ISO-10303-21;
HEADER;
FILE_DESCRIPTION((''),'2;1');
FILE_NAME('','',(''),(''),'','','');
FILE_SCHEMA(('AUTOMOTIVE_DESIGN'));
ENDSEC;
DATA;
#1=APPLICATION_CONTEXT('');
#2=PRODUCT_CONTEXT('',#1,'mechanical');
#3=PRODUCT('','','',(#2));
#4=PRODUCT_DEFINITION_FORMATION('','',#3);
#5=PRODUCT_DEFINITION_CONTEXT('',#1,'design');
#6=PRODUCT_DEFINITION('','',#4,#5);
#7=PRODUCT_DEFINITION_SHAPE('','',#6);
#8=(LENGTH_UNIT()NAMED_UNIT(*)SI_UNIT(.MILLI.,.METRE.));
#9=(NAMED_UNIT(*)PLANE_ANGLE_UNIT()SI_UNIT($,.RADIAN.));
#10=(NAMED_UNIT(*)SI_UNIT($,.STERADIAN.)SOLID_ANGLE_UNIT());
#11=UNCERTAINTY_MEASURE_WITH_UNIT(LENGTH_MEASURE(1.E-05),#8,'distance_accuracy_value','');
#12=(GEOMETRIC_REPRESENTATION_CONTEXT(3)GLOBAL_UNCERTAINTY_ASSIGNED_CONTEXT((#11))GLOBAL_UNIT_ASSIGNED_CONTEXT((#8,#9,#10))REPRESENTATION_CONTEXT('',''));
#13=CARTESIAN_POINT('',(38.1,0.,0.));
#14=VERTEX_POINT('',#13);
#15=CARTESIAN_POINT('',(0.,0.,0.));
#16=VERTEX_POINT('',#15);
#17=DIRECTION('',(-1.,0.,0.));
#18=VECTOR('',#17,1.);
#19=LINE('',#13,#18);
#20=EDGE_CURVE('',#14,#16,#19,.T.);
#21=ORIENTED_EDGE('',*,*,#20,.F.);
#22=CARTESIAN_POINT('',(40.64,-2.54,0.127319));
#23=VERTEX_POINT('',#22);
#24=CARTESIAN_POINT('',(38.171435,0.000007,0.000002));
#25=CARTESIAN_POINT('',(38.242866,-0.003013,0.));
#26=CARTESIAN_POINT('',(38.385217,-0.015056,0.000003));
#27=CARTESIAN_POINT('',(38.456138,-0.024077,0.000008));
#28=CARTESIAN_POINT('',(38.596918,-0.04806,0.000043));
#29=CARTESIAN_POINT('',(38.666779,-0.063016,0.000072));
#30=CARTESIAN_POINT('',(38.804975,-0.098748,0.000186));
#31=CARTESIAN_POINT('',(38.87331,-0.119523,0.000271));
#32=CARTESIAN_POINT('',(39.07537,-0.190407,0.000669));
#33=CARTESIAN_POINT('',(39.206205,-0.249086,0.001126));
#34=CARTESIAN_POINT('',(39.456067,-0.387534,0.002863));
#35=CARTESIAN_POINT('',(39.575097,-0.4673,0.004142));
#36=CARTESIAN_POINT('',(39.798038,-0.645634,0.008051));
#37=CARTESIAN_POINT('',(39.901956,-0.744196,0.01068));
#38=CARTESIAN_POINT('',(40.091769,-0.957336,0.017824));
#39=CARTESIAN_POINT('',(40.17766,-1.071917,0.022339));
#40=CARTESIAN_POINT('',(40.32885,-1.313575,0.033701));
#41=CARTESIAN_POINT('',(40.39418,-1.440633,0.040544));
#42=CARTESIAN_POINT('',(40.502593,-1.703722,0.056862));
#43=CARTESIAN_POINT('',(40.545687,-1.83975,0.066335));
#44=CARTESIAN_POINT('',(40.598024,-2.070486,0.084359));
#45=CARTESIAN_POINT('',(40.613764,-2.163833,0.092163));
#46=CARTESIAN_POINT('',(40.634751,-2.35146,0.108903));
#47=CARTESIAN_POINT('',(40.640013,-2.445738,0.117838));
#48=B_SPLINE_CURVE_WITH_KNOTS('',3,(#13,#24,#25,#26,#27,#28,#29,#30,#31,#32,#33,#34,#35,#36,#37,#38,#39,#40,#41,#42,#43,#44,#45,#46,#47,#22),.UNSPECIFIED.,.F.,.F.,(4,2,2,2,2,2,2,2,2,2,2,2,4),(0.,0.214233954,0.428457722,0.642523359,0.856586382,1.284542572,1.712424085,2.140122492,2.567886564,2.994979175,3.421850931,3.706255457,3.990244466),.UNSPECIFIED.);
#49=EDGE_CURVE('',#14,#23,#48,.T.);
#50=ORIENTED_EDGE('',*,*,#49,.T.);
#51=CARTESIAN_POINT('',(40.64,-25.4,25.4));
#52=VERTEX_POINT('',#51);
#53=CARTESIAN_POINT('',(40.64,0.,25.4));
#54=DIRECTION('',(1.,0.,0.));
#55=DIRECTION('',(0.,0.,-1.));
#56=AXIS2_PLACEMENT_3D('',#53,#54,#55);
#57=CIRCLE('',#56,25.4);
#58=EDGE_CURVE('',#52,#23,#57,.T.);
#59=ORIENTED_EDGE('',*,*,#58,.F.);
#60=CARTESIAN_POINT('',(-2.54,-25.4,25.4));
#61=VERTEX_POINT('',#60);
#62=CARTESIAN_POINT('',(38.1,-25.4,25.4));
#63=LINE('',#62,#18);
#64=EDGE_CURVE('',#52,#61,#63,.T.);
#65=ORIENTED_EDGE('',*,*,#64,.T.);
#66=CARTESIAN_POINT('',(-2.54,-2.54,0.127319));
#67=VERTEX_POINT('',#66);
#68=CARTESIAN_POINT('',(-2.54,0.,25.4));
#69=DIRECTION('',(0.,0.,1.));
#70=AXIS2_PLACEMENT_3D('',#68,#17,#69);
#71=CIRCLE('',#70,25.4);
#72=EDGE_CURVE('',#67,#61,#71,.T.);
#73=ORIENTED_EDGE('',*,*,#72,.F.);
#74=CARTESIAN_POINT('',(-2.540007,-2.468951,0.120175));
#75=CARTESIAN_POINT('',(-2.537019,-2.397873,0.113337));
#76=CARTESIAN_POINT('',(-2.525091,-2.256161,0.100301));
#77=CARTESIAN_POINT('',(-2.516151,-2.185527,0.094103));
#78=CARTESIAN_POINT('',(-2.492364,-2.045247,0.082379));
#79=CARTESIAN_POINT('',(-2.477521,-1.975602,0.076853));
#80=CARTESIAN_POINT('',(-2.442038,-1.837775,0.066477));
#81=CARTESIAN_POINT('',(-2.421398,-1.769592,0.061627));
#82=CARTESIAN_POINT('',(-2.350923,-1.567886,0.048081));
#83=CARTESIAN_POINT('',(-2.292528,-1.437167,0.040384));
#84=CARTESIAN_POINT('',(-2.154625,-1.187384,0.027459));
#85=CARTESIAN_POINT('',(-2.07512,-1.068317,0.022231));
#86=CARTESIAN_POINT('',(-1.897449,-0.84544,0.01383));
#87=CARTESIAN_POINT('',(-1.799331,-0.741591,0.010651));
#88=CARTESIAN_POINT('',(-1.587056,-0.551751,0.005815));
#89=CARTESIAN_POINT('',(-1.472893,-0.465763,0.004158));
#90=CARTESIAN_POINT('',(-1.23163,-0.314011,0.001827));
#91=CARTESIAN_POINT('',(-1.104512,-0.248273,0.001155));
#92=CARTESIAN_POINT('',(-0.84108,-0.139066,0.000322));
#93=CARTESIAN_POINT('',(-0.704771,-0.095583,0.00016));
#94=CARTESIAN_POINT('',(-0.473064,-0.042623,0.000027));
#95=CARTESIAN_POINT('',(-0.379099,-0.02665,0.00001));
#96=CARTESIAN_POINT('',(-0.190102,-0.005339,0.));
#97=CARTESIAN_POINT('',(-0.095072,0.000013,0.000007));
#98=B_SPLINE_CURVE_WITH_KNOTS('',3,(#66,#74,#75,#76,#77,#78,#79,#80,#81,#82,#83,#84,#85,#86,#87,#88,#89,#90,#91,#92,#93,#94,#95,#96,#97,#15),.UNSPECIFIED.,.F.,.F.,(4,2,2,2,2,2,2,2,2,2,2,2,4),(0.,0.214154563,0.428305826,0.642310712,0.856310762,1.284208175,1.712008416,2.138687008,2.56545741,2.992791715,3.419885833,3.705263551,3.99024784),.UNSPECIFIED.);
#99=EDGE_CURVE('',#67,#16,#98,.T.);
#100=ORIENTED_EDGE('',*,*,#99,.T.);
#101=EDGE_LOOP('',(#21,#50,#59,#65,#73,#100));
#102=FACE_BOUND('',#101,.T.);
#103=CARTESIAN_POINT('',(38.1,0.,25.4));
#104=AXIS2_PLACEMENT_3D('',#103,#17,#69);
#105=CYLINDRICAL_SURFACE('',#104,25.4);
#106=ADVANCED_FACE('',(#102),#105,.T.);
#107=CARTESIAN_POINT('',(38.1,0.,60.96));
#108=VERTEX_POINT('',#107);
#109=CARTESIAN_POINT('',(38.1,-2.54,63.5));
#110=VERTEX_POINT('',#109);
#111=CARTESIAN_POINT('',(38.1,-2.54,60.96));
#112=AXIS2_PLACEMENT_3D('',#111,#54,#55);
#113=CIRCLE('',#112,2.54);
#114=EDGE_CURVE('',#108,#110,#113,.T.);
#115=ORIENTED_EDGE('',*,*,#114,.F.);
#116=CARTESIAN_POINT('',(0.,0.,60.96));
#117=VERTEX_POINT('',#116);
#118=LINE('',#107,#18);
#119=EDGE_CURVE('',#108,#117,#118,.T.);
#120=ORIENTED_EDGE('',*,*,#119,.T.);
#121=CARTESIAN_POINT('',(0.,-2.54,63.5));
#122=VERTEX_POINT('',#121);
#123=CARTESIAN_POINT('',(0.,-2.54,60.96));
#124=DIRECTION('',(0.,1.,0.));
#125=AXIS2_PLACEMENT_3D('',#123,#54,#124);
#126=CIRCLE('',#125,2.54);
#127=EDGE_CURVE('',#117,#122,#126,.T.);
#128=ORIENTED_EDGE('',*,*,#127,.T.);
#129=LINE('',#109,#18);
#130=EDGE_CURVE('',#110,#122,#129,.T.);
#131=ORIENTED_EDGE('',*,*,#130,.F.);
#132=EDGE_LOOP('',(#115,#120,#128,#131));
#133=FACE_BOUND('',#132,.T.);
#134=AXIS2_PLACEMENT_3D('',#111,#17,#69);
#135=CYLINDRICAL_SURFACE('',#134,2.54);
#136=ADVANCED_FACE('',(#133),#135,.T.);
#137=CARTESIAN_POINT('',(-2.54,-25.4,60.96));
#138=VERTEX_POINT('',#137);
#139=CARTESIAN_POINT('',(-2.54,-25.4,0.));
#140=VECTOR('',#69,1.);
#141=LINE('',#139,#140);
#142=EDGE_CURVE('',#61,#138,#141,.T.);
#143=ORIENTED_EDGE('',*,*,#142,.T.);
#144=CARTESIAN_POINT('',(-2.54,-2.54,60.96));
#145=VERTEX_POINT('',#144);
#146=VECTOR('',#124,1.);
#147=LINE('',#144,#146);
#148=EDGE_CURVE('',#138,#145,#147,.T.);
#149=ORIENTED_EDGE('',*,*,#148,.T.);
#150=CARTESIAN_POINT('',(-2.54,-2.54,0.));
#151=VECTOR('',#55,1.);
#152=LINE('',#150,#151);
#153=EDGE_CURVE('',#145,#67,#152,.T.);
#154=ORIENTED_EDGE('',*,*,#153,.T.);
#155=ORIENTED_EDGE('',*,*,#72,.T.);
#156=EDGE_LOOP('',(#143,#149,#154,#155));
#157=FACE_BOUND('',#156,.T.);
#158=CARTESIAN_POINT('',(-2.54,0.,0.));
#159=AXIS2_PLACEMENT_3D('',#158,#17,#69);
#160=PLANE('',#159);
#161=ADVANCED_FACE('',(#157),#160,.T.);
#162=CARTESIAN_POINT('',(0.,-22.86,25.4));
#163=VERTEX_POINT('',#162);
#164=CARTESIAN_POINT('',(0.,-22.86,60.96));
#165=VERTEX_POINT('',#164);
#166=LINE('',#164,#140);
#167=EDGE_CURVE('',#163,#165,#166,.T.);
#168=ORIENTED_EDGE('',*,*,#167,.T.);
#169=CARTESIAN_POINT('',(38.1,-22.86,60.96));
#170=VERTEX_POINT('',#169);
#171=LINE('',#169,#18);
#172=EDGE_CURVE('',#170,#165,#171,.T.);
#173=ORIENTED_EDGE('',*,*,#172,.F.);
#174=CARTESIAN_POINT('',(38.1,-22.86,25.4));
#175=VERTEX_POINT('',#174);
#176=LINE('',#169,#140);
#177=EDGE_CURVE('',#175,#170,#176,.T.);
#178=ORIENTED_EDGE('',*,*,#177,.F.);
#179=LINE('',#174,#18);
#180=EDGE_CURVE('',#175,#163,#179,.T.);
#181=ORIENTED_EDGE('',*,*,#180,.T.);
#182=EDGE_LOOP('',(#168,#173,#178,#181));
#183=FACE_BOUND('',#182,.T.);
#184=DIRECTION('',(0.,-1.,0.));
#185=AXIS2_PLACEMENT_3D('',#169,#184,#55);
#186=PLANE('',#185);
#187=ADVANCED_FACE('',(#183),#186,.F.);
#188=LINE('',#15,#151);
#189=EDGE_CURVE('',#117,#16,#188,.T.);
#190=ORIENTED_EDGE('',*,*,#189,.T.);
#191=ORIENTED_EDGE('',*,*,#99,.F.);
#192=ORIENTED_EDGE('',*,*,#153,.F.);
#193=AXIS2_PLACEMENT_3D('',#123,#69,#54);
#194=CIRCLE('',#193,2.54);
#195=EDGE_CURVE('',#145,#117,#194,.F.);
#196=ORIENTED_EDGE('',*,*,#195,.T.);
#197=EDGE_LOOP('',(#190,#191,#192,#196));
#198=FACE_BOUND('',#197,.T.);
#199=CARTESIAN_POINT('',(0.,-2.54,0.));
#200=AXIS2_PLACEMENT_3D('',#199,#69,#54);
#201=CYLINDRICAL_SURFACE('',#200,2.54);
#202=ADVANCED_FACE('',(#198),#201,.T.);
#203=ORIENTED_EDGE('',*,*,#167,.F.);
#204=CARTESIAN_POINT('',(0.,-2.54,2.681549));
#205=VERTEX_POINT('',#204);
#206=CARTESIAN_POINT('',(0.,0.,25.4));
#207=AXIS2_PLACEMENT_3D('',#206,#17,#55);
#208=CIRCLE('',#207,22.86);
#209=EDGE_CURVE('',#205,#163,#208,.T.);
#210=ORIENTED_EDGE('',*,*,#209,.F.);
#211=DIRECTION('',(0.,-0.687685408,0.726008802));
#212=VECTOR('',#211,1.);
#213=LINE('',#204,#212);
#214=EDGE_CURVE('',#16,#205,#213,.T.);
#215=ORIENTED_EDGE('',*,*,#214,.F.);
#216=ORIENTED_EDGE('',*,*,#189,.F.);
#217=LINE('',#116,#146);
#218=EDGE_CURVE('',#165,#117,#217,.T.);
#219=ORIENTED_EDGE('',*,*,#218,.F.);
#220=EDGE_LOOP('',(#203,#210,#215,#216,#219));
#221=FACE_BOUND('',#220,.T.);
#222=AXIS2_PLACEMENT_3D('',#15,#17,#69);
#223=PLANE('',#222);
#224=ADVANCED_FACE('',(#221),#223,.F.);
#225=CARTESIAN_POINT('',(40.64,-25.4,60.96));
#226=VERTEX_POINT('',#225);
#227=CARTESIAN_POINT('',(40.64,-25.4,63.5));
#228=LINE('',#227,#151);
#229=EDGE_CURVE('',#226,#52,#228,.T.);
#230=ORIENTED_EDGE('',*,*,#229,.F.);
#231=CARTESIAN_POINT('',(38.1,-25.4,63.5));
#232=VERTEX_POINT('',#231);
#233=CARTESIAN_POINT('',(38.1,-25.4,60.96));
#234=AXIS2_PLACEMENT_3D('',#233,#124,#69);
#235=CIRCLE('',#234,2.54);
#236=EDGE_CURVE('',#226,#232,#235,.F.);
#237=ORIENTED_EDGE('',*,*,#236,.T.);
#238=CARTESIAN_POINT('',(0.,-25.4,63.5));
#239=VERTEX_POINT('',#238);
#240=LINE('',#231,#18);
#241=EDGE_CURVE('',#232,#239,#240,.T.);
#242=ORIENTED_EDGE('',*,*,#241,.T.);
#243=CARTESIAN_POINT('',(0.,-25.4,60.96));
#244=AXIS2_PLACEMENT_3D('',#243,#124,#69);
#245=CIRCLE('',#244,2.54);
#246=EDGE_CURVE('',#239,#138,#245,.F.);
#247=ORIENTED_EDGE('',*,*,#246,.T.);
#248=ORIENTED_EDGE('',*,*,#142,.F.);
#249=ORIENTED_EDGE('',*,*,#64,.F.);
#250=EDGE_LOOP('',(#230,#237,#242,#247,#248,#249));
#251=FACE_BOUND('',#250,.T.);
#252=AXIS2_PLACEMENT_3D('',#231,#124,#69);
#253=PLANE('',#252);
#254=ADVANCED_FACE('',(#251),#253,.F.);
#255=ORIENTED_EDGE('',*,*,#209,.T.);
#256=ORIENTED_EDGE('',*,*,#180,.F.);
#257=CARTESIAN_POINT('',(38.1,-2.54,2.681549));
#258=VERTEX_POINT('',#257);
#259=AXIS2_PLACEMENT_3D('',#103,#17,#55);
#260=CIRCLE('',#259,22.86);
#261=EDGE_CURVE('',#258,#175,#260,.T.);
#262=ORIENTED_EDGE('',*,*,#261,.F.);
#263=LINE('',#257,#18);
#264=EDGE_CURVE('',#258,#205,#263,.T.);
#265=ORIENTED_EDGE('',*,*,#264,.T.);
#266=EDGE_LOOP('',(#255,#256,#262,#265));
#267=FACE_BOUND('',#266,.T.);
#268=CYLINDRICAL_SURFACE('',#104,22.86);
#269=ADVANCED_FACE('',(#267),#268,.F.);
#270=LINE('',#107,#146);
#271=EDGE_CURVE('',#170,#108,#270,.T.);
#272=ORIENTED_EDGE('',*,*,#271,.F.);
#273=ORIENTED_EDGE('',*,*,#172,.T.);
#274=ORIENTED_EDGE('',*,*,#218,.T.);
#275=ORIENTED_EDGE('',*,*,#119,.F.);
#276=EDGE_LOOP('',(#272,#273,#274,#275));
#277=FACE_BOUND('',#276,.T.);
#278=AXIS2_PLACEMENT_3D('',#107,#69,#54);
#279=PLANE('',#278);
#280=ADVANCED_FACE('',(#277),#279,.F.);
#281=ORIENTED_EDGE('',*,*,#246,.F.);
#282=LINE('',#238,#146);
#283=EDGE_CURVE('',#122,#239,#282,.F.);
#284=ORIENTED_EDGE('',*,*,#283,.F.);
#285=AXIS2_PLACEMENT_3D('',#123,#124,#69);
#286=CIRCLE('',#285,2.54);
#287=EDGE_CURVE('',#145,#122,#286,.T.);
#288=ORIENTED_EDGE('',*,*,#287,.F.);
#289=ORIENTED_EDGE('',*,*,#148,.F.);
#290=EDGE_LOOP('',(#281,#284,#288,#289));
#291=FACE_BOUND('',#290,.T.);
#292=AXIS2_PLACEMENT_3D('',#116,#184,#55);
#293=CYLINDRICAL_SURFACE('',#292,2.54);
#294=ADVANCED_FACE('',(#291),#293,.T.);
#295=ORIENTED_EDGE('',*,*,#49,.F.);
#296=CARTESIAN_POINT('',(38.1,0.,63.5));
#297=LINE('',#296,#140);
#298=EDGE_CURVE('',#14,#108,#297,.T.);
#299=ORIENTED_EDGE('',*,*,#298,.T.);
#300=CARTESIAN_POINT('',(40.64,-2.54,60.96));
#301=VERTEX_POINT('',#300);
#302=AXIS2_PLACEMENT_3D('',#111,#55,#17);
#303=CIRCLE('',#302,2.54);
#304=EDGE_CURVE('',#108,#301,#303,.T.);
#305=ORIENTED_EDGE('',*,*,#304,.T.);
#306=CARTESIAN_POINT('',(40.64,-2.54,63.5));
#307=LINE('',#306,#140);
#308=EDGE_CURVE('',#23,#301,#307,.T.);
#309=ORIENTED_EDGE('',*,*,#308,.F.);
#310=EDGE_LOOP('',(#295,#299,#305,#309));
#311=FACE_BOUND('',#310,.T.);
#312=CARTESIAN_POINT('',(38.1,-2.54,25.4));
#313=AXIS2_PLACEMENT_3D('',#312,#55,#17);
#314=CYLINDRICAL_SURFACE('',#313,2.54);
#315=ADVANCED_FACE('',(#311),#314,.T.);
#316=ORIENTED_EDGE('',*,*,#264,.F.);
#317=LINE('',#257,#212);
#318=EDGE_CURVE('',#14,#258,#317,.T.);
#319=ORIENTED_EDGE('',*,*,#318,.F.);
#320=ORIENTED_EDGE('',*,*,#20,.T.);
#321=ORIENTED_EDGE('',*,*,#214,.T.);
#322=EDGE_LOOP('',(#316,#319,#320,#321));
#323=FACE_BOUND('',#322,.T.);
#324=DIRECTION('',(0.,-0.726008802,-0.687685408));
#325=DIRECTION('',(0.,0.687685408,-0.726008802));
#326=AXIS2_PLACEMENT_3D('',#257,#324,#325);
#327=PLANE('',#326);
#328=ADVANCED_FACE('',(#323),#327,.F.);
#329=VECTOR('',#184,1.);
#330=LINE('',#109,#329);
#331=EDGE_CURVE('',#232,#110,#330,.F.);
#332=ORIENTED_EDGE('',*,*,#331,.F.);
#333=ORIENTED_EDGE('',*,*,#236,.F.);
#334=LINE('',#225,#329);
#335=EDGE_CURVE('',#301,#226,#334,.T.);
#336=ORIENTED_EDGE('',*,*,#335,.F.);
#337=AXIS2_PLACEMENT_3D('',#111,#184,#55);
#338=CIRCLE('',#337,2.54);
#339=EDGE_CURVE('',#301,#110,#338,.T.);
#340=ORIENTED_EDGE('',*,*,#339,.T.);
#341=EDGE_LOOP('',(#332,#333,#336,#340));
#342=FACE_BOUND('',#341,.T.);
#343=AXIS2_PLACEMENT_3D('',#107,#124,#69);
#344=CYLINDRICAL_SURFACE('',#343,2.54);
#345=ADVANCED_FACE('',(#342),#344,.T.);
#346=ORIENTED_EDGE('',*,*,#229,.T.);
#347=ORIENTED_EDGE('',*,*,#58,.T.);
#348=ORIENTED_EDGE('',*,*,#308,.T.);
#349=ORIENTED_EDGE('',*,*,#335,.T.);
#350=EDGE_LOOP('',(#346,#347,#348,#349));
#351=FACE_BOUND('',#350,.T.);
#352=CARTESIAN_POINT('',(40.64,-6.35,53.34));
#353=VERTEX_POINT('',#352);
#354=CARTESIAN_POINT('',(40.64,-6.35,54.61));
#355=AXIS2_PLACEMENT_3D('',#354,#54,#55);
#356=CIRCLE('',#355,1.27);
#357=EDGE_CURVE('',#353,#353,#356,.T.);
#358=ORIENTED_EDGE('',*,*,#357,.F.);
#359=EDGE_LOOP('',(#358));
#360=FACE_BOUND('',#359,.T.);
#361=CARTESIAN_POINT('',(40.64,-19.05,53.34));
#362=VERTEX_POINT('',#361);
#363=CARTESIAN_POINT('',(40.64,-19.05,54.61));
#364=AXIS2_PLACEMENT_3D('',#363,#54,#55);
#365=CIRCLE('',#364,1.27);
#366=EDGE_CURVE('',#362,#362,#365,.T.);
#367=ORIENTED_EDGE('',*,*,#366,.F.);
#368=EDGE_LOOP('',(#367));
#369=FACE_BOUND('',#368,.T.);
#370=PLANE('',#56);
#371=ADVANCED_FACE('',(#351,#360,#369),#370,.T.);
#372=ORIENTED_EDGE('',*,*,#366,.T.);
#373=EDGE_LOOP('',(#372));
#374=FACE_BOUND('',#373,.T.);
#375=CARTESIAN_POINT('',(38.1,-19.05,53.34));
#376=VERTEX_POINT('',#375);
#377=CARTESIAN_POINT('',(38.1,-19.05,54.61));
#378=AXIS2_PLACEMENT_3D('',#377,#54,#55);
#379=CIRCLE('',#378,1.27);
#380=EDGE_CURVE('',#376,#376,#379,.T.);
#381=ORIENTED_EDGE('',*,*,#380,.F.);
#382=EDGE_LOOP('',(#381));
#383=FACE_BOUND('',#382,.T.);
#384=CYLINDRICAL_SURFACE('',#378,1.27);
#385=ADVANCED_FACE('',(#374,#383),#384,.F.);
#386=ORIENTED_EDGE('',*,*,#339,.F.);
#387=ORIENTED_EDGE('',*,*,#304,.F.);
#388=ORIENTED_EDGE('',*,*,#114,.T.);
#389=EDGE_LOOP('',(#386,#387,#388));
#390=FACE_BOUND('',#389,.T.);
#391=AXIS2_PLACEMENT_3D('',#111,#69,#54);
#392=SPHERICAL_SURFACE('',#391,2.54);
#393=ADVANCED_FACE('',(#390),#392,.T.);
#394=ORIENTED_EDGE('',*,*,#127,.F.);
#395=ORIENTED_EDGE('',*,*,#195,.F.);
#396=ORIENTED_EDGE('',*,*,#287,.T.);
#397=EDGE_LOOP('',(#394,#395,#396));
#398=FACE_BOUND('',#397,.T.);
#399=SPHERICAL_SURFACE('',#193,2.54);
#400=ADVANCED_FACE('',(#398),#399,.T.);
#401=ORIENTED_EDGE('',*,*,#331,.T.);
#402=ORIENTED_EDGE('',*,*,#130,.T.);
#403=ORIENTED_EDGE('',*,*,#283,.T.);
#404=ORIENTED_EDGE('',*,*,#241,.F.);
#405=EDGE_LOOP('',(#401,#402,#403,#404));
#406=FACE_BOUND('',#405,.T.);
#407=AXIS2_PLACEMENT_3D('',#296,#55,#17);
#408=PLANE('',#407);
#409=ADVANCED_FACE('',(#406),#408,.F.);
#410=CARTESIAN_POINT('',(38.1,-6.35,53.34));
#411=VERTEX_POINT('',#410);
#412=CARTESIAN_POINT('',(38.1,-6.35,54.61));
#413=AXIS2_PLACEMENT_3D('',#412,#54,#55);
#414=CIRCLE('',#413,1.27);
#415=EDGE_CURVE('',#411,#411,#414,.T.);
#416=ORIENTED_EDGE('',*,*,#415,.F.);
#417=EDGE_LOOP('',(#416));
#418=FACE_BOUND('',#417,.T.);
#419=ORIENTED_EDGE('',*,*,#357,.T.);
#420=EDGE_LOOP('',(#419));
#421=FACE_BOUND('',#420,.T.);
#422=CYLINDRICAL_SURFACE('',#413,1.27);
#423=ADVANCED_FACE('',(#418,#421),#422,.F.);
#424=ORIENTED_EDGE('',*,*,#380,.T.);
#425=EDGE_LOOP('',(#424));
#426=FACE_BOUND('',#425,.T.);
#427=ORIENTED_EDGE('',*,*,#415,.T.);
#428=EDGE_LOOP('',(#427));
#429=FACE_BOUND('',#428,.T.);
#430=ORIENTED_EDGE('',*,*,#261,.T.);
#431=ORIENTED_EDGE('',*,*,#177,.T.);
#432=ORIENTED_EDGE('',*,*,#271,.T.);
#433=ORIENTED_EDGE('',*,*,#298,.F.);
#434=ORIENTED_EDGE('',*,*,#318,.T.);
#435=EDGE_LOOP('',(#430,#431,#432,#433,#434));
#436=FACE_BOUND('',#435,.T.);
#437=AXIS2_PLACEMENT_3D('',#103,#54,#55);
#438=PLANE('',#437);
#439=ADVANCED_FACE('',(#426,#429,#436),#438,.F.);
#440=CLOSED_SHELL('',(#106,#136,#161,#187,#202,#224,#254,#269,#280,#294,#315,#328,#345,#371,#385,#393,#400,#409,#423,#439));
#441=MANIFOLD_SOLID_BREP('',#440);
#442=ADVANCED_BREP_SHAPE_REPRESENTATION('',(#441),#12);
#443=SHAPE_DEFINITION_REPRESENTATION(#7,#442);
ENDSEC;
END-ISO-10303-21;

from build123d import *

# Parameters (mm, degrees)
BOSS_EXTRUDE2_DEPTH = 38.1
BOSS_EXTRUDE3_DEPTH = 2.54
BOSS_EXTRUDE5_START = 2.54
BOSS_EXTRUDE5_DEPTH = 2.54
FILLET1_R           = 2.54
FILLET3_R           = 2.54
FILLET5_R           = 2.54
SKETCH5_R           = 1.27
CUT_EXTRUDE1_DEPTH  = 2.54


with BuildPart() as part:
    # Sketch1 → Boss-Extrude2 (new body)
    with BuildSketch(Plane(origin=(0, 0, 0), x_dir=(0, 0, -1), z_dir=(1, 0, 0))):
        with BuildLine():
            Line((-60.96, 0), (-63.5, 0))
            Line((-63.5, 0), (-63.5, -25.4))
            Line((-63.5, -25.4), (-25.4, -25.4))
            ThreePointArc((-25.4, -25.4), (-7.439487758, -17.960512242), (0, 0))
            Line((0, 0), (-2.681549349, -2.54))
            ThreePointArc((-2.681549349, -2.54), (-10.16, -17.038837989), (-25.4, -22.86))
            Line((-25.4, -22.86), (-60.96, -22.86))
            Line((-60.96, -22.86), (-60.96, 0))
        make_face()
    extrude(amount=BOSS_EXTRUDE2_DEPTH)

    # Sketch2 → Boss-Extrude3 (add)
    with BuildSketch(Plane(origin=(38.1, 0, 0), x_dir=(0, 0, -1), z_dir=(1, 0, 0))):
        with BuildLine():
            Line((-63.5, 0), (0, 0))
            ThreePointArc((0, 0), (-7.439487758, -17.960512242), (-25.4, -25.4))
            Line((-25.4, -25.4), (-63.5, -25.4))
            Line((-63.5, -25.4), (-63.5, 0))
        make_face()
    extrude(amount=BOSS_EXTRUDE3_DEPTH)

    # Sketch3 → Boss-Extrude5 (add)
    with BuildSketch(Plane.ZY.offset(BOSS_EXTRUDE5_START)):
        with BuildLine():
            Line((2.681549349, -2.54), (0, 0))
            ThreePointArc((0, 0), (7.439487758, -17.960512242), (25.4, -25.4))
            Line((25.4, -25.4), (63.5, -25.4))
            Line((63.5, -25.4), (63.5, 0))
            Line((63.5, 0), (60.96, 0))
            Line((60.96, 0), (60.96, -22.86))
            Line((60.96, -22.86), (25.4, -22.86))
            ThreePointArc((25.4, -22.86), (10.16, -17.038837989), (2.681549349, -2.54))
        make_face()
        with BuildLine():
            Line((60.96, 0), (0, 0))
            Line((0, 0), (2.681549349, -2.54))
            ThreePointArc((2.681549349, -2.54), (10.16, -17.038837989), (25.4, -22.86))
            Line((25.4, -22.86), (60.96, -22.86))
            Line((60.96, -22.86), (60.96, 0))
        make_face()
    extrude(amount=-BOSS_EXTRUDE5_DEPTH)

    # Fillet1
    fillet1_edges = [part.edges().sort_by_distance(p)[0] for p in [
        (40.64, 0, 31.75),
    ]]
    fillet(fillet1_edges, radius=FILLET1_R - 0.0001)  # a hair under: the kernel refuses the full size

    # Fillet3
    fillet3_edges = [part.edges().sort_by_distance(p)[0] for p in [
        (-2.54, 0, 31.75),
    ]]
    fillet(fillet3_edges, radius=FILLET3_R - 0.0001)  # a hair under: the kernel refuses the full size

    # Fillet5
    fillet5_edges = [part.edges().sort_by_distance(p)[0] for p in [
        (40.64, -13.96995, 63.5),
        (39.896080514, -0.743919486, 63.5),
        (-2.54, -13.96995, 63.5),
        (-1.796080514, -0.743919486, 63.5),
        (19.05, 0, 63.5),
    ]]
    fillet(fillet5_edges, radius=FILLET5_R - 0.0001)  # a hair under: the kernel refuses the full size

    # Sketch5 → Cut-Extrude1 (cut)
    with BuildSketch(Plane(origin=(40.64, 0, 0), x_dir=(0, 0, -1), z_dir=(1, 0, 0))):
        with Locations((-54.61, -6.35)):
            Circle(SKETCH5_R)
        with Locations((-54.61, -19.05)):
            Circle(SKETCH5_R)
    extrude(amount=-CUT_EXTRUDE1_DEPTH, mode=Mode.SUBTRACT)


solid = part.part
